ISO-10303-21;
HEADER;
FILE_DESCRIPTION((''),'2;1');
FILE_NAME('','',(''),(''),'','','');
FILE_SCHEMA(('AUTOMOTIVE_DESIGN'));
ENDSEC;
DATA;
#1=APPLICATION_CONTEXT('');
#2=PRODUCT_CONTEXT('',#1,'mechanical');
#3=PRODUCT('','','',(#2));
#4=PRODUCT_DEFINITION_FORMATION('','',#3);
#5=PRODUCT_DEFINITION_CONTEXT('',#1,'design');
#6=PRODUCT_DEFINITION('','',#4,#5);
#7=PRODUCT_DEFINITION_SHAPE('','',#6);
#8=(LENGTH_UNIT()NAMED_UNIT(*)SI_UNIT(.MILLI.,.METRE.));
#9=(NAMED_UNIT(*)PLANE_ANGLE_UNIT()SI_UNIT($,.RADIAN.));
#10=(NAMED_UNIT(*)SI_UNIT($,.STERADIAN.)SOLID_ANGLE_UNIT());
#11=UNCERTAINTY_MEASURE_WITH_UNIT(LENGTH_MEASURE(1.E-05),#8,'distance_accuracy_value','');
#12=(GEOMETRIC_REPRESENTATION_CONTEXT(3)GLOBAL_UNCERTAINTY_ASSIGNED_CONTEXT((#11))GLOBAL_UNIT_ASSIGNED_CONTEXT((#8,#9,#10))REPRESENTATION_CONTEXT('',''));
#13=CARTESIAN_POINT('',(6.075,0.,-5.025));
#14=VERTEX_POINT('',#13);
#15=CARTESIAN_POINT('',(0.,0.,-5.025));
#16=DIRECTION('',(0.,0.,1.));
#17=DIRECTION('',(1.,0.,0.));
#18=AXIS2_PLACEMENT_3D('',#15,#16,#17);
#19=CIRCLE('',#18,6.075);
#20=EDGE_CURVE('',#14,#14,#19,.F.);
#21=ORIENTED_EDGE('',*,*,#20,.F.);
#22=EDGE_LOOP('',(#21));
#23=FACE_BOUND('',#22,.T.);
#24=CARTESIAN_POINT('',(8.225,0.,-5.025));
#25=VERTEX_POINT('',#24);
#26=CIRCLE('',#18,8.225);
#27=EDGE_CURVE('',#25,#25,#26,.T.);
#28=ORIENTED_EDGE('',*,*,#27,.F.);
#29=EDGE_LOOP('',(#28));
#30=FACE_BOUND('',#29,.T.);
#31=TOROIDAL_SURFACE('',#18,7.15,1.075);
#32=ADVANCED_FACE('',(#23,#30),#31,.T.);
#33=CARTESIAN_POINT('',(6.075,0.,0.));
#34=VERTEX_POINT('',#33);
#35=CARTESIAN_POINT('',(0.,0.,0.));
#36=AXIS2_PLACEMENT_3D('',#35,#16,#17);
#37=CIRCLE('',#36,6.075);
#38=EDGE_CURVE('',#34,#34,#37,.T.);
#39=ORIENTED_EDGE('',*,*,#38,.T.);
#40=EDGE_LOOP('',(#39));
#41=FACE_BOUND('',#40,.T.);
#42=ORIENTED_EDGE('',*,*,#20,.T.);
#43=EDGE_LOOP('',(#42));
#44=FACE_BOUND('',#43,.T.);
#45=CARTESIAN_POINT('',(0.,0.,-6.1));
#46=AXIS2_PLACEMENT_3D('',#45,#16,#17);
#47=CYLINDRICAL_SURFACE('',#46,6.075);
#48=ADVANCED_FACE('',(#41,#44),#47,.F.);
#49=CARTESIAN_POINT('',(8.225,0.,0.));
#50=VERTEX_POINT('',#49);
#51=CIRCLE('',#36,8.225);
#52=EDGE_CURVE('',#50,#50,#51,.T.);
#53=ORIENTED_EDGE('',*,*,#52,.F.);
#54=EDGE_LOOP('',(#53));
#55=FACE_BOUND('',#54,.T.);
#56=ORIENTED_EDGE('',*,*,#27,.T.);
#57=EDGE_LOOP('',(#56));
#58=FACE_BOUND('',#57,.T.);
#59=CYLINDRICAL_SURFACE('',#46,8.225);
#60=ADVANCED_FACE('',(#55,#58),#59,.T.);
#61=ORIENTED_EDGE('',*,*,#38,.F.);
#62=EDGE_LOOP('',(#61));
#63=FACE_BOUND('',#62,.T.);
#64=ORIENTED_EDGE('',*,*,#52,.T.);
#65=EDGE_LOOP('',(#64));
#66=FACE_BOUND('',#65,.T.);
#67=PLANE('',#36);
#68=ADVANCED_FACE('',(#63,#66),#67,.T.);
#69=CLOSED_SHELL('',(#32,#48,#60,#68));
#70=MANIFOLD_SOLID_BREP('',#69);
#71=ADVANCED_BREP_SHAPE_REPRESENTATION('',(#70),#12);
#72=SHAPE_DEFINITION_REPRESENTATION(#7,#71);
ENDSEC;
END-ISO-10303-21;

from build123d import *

# Parameters (mm, degrees)
CROQUIS2_R              = 8.225
CROQUIS2_R_2            = 6.075
SALIENTE_EXTRUIR1_DEPTH = 6.1
REDONDEO1_R             = 1.075


with BuildPart() as part:
    # Croquis2 → Saliente-Extruir1 (new body)
    with BuildSketch(Plane.XY):
        Circle(CROQUIS2_R)
        Circle(CROQUIS2_R_2, mode=Mode.SUBTRACT)
    extrude(amount=-SALIENTE_EXTRUIR1_DEPTH)

    # Redondeo1
    redondeo1_edges = [part.edges().sort_by_distance(p)[0] for p in [
        (-8.225, 0, -6.1),
        (-6.075, 0, -6.1),
    ]]
    fillet(redondeo1_edges, radius=REDONDEO1_R - 0.0001)  # a hair under: the kernel refuses the full size


solid = part.part
